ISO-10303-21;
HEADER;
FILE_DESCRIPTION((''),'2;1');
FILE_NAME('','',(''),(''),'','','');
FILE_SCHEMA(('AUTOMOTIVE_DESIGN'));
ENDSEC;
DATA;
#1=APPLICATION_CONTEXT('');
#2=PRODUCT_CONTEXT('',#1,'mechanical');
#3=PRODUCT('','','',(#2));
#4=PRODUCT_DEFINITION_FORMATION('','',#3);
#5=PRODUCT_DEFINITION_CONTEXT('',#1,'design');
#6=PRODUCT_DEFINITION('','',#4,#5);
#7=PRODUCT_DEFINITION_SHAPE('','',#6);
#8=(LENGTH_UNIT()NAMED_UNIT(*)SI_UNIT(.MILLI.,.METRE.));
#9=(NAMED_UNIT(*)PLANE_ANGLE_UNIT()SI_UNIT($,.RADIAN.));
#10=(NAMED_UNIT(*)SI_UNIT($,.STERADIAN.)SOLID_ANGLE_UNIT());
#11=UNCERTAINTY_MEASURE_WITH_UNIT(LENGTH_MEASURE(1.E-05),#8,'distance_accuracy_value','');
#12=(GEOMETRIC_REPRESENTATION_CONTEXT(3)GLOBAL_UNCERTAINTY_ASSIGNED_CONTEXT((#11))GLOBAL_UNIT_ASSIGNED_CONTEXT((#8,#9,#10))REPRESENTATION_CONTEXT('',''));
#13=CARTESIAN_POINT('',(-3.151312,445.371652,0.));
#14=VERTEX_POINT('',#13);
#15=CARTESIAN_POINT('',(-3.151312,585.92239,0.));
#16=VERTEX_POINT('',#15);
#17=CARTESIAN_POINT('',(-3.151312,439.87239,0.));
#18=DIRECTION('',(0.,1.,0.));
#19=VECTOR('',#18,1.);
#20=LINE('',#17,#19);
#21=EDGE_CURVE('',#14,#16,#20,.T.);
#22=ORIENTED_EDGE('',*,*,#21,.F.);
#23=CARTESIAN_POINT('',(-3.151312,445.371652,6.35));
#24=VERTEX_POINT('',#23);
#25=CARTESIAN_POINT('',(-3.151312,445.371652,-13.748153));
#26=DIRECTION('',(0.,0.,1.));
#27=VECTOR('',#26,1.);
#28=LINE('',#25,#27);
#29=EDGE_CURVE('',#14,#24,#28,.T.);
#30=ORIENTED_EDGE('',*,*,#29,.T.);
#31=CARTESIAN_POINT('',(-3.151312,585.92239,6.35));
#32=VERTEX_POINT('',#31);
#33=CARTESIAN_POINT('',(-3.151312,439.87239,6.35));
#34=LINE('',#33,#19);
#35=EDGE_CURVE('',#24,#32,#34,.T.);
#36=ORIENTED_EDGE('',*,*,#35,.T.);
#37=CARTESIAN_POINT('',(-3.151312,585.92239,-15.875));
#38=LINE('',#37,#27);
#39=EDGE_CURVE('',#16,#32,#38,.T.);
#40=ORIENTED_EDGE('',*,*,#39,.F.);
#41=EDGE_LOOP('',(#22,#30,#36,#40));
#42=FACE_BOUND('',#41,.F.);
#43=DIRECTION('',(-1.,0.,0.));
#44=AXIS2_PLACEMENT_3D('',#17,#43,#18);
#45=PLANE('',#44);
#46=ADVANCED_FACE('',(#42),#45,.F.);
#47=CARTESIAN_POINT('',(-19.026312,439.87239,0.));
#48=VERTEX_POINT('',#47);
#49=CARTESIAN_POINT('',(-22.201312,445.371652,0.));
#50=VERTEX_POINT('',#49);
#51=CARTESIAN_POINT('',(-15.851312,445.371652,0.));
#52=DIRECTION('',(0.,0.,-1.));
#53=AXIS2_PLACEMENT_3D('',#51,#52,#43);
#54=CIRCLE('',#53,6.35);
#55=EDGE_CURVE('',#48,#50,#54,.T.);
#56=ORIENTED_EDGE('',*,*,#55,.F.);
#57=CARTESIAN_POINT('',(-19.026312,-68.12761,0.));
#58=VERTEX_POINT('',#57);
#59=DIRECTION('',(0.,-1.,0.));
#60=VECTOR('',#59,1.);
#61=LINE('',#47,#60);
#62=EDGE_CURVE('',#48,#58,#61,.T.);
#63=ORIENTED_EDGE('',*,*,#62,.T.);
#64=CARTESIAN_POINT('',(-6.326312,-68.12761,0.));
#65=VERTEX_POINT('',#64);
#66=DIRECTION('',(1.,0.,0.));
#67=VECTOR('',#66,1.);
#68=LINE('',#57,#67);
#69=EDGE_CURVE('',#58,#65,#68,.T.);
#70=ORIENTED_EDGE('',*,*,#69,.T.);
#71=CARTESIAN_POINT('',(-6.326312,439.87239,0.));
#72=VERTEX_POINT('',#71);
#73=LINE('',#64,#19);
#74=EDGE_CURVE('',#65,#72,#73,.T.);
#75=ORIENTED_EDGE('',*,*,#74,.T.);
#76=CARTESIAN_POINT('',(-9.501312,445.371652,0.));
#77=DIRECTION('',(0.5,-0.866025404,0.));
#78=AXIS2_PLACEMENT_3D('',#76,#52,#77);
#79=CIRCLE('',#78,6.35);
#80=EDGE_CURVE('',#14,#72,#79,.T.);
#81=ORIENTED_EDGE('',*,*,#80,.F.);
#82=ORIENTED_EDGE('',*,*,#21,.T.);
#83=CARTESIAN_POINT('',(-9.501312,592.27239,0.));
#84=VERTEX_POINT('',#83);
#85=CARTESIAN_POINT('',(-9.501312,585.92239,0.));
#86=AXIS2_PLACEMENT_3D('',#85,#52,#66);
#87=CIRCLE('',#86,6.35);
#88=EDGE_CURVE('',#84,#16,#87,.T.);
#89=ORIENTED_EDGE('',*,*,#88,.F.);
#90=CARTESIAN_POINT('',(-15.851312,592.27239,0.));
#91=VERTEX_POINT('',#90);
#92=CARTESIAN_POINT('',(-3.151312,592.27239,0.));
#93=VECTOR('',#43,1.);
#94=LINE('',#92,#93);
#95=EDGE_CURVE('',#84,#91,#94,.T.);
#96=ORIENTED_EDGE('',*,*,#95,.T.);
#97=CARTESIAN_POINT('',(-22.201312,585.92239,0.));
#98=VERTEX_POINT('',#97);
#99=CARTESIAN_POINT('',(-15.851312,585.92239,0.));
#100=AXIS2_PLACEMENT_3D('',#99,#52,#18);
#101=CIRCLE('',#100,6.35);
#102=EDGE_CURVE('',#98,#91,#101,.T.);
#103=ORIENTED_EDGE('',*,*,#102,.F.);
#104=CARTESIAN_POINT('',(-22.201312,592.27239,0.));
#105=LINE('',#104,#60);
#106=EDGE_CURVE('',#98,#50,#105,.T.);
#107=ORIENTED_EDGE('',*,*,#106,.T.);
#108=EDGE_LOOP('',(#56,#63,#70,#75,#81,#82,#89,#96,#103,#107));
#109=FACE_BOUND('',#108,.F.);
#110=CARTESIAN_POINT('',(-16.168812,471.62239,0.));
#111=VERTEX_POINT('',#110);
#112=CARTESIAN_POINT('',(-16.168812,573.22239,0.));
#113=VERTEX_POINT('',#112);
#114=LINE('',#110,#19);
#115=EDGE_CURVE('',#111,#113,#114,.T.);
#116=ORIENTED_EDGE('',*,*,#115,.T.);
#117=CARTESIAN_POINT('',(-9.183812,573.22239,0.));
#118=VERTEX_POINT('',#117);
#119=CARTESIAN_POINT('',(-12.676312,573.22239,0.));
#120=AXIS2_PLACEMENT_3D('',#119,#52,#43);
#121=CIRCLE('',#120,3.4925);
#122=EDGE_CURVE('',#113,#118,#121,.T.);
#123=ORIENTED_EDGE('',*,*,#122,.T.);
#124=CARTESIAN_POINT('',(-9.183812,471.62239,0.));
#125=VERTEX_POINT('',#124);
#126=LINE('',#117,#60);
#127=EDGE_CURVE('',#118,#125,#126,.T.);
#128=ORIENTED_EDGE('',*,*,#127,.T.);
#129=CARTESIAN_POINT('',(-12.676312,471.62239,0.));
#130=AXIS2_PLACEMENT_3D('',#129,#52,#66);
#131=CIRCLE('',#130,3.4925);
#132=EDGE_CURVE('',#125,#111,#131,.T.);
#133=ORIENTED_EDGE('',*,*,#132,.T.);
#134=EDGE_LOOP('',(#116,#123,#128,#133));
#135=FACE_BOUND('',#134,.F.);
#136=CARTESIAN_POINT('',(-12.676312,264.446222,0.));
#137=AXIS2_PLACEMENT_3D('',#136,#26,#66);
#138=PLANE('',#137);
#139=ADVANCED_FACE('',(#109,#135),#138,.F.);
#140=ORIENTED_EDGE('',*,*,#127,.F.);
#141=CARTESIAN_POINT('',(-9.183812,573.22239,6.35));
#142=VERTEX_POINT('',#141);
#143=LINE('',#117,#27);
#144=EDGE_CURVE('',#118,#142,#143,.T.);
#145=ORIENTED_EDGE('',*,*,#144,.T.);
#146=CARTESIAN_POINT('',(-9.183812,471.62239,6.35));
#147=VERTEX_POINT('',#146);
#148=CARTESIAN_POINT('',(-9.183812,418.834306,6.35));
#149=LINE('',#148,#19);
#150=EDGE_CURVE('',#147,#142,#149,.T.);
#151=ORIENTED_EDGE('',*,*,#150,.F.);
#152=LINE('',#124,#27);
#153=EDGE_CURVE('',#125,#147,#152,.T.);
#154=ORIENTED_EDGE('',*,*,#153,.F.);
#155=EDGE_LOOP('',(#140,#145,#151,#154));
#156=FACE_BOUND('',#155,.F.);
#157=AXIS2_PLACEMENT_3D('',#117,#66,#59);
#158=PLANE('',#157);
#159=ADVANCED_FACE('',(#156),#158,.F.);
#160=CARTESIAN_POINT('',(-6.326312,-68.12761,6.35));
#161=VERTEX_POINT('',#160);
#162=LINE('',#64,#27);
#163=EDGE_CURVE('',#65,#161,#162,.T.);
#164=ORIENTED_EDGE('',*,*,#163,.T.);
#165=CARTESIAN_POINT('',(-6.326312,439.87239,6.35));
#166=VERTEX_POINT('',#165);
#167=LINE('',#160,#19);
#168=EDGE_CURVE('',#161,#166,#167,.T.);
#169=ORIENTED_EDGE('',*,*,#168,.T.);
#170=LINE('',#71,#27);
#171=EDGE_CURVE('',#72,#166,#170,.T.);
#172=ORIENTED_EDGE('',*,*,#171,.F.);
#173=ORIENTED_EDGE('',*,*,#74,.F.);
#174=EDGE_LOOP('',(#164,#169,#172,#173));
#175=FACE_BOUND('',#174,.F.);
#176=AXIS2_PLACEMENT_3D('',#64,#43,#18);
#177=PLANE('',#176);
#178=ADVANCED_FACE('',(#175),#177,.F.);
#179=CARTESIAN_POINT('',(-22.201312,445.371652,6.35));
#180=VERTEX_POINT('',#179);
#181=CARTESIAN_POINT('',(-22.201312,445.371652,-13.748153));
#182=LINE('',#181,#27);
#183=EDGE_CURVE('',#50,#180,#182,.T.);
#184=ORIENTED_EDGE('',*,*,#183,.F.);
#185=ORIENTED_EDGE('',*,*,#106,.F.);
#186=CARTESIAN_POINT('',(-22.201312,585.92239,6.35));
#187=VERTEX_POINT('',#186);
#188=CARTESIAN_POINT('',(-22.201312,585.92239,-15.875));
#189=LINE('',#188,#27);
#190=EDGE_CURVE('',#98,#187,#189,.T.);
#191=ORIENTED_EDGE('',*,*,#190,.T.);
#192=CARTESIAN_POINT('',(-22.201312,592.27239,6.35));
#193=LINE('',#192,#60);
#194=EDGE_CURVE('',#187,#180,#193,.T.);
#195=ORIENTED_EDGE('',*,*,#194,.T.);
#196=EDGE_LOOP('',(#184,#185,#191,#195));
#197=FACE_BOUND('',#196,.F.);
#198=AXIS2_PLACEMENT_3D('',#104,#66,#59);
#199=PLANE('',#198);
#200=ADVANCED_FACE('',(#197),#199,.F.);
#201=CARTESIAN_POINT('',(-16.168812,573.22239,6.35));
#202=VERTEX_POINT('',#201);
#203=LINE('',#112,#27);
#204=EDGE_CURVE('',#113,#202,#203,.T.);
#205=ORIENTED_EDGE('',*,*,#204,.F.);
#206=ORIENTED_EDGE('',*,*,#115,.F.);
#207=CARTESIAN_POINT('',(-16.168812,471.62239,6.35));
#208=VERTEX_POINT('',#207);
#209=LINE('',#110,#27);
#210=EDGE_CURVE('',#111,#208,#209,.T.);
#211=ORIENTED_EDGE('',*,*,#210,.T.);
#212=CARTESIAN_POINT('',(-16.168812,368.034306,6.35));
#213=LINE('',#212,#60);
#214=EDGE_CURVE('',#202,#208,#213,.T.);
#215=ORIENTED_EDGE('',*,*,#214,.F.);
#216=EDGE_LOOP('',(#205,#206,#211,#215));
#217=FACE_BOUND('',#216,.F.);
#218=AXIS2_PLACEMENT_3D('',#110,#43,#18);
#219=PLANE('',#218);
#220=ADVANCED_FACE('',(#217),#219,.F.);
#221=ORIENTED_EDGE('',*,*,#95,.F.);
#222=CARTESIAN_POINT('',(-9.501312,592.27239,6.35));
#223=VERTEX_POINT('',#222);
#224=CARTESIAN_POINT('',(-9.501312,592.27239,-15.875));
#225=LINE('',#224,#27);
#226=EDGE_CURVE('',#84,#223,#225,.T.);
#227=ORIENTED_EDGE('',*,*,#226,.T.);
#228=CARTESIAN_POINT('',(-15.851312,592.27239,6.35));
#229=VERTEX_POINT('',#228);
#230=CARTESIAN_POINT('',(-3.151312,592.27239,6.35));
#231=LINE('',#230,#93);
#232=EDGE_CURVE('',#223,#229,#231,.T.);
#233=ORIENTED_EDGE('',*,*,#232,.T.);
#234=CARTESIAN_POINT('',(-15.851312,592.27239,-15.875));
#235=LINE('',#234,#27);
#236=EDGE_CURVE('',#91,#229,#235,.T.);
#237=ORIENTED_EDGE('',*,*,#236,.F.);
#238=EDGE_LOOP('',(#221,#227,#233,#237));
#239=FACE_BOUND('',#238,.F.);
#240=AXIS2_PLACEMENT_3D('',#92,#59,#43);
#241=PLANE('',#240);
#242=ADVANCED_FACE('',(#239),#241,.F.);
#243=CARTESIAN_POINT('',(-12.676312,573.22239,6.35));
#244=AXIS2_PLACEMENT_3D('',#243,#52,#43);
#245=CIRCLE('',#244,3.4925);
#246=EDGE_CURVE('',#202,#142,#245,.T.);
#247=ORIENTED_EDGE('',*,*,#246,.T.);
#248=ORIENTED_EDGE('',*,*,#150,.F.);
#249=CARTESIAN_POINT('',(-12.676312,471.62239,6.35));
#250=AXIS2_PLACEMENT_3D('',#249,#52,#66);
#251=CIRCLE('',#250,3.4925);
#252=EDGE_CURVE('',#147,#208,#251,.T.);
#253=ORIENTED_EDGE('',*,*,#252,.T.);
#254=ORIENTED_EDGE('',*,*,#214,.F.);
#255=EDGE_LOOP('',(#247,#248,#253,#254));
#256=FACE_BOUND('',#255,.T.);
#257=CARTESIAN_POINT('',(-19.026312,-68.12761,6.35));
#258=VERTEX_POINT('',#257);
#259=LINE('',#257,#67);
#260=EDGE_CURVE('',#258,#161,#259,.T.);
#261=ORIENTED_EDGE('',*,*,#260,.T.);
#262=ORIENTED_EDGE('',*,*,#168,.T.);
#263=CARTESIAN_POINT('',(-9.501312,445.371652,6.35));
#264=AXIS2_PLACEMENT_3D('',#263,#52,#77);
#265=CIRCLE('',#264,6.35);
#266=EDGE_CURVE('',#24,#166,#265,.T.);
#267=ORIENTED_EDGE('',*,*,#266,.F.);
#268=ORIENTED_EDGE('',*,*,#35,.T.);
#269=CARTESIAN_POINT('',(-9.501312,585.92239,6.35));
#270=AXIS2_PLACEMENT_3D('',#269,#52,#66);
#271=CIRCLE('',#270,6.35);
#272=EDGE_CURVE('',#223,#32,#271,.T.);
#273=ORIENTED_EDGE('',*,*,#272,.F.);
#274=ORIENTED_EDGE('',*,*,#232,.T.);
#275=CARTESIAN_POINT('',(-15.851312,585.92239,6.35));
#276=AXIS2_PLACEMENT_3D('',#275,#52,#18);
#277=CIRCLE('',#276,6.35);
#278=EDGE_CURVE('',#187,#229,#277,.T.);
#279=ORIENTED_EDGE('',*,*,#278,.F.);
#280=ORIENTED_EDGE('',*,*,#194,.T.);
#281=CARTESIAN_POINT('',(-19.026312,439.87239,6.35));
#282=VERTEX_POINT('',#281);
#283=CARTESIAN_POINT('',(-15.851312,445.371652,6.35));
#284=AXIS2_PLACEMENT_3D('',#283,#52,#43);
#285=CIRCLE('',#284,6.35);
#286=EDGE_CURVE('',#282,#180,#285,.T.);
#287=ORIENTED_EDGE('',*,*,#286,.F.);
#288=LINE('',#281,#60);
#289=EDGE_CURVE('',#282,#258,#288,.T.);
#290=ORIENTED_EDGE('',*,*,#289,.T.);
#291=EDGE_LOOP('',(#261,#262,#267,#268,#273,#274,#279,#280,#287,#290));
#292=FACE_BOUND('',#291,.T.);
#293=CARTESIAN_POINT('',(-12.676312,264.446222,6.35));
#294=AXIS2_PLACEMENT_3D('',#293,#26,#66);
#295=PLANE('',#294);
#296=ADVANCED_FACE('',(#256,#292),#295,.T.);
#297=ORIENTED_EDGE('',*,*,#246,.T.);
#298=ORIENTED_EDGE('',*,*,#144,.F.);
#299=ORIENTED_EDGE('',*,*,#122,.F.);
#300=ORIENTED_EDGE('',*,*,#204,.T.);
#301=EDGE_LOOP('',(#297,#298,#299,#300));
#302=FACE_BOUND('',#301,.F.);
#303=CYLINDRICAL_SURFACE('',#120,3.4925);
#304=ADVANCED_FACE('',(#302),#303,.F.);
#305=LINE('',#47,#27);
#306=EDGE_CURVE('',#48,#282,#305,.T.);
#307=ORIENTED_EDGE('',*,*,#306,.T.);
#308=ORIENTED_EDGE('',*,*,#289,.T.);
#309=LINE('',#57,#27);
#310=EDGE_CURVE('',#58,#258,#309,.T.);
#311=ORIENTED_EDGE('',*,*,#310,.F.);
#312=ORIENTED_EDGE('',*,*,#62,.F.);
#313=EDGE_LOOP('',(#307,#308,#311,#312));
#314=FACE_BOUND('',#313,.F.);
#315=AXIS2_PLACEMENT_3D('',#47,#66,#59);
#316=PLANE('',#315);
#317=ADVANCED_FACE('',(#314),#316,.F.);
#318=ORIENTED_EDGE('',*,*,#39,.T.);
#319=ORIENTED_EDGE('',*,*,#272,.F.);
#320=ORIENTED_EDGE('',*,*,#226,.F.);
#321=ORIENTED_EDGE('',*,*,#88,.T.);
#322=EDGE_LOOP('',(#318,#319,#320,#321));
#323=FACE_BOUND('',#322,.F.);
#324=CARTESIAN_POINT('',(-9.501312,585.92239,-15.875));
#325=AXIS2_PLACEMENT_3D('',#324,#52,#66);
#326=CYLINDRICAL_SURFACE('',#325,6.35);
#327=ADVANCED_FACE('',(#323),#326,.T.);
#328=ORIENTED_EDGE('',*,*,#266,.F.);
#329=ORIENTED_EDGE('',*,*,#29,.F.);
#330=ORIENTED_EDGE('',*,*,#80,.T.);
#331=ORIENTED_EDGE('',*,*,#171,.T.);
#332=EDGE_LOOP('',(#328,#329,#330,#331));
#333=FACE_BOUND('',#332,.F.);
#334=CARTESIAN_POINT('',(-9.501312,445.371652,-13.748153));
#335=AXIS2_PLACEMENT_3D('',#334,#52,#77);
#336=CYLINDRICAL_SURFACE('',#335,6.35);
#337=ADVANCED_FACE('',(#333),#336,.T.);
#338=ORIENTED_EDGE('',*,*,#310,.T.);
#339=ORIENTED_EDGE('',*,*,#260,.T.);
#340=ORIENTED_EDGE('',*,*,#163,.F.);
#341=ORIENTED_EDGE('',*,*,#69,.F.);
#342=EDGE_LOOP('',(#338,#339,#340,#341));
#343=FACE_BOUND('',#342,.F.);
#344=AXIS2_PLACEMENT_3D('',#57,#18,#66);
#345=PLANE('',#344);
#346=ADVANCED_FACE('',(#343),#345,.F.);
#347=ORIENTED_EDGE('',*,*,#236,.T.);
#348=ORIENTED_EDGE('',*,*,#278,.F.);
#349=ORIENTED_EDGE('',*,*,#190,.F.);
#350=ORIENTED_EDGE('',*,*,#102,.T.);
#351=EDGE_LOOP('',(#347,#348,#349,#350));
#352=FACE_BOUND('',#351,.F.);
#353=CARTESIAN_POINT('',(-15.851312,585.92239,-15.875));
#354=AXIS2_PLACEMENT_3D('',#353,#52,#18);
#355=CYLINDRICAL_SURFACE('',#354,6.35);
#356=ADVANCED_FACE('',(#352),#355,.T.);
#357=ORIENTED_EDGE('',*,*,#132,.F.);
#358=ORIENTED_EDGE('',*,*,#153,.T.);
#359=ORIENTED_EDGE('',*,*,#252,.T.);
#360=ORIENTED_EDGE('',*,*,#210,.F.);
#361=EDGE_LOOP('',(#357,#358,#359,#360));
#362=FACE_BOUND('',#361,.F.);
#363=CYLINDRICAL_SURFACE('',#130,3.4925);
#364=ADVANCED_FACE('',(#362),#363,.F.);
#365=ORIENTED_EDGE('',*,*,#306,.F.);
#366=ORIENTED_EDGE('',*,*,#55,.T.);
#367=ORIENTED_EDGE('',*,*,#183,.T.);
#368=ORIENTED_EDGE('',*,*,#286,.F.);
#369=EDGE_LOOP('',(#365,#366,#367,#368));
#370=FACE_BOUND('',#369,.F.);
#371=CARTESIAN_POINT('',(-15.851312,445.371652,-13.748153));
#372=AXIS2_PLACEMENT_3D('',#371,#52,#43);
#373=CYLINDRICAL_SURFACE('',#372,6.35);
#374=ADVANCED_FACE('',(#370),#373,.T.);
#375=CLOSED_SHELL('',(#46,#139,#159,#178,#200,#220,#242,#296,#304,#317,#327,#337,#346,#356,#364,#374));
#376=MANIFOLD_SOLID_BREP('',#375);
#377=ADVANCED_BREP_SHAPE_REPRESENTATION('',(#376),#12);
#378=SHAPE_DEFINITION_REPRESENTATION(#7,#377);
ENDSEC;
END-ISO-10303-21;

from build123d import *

# Parameters (mm, degrees)
F1_DEPTH    = 6.35
F2_T1_DEPTH = 38.1
F2_T3_DEPTH = 33.8463065702
F4_DEPTH    = 6.351


# Not quite as in the source:
# - a fillet or chamfer that OpenCascade refuses, or shapes differently, is made with other operations: its cross-section is extruded or revolved along the edge and cut away or added


with BuildPart() as f1:
    # F0 (on Top) → F1 (new body)
    with BuildSketch(Plane.XY):
        Polygon((-3.1513119073, 592.2723904558), (-22.2013119073, 592.2723904558), (-22.2013119073, 439.8723904558), (-19.0263119073, 439.8723904558), (-19.0263119073, -68.1276095442), (-6.3263119073, -68.1276095442), (-6.3263119073, 439.8723904558), (-3.1513119073, 439.8723904558), align=None)
    extrude(amount=F1_DEPTH)

    # F2: fillet of radius 6.35 on 4 edges, made by hand

    # F2_s2 → F2_t1 (cut)
    with BuildSketch(Plane.XY.offset(-15.875)):
        with BuildLine():
            ThreePointArc((-3.1513119073, 585.9223904558), (-5.0111838468, 590.4125185164), (-9.5013119073, 592.2723904558))
            Line((-9.5013119073, 592.2723904558), (-3.1513119073, 592.2723904558))
            Line((-3.1513119073, 592.2723904558), (-3.1513119073, 585.9223904558))
        make_face()
        with BuildLine():
            ThreePointArc((-15.8513119073, 592.2723904558), (-20.3414399678, 590.4125185164), (-22.2013119073, 585.9223904558))
            Line((-22.2013119073, 585.9223904558), (-22.2013119073, 592.2723904558))
            Line((-22.2013119073, 592.2723904558), (-15.8513119073, 592.2723904558))
        make_face()
    extrude(amount=F2_T1_DEPTH, mode=Mode.SUBTRACT)

    # F2_s4 → F2_t3 (cut)
    with BuildSketch(Plane.XY.offset(-13.7481532851)):
        with BuildLine():
            ThreePointArc((-22.2013119073, 445.3716517699), (-21.3505732213, 442.1966517699), (-19.0263119073, 439.8723904558))
            Line((-19.0263119073, 439.8723904558), (-22.2013119073, 439.8723904558))
            Line((-22.2013119073, 439.8723904558), (-22.2013119073, 445.3716517699))
        make_face()
        with BuildLine():
            ThreePointArc((-6.3263119073, 439.8723904558), (-4.0020505933, 442.1966517699), (-3.1513119073, 445.3716517699))
            Line((-3.1513119073, 445.3716517699), (-3.1513119073, 439.8723904558))
            Line((-3.1513119073, 439.8723904558), (-6.3263119073, 439.8723904558))
        make_face()
    extrude(amount=F2_T3_DEPTH, mode=Mode.SUBTRACT)

    # F3 (on face) → F4 (cut, through all)
    with BuildSketch(Plane(origin=(0, 0, 0), x_dir=(1, 0, 0), z_dir=(0, 0, -1))):
        with BuildLine():
            Line((-16.1688119073, -471.6223904558), (-16.1688119073, -573.2223904558))
            ThreePointArc((-16.1688119073, -573.2223904558), (-12.6763119073, -576.7148904558), (-9.1838119073, -573.2223904558))
            Line((-9.1838119073, -573.2223904558), (-9.1838119073, -471.6223904558))
            ThreePointArc((-9.1838119073, -471.6223904558), (-12.6763119073, -468.1298904558), (-16.1688119073, -471.6223904558))
        make_face()
    extrude(amount=-F4_DEPTH, mode=Mode.SUBTRACT)


solid = f1.part
